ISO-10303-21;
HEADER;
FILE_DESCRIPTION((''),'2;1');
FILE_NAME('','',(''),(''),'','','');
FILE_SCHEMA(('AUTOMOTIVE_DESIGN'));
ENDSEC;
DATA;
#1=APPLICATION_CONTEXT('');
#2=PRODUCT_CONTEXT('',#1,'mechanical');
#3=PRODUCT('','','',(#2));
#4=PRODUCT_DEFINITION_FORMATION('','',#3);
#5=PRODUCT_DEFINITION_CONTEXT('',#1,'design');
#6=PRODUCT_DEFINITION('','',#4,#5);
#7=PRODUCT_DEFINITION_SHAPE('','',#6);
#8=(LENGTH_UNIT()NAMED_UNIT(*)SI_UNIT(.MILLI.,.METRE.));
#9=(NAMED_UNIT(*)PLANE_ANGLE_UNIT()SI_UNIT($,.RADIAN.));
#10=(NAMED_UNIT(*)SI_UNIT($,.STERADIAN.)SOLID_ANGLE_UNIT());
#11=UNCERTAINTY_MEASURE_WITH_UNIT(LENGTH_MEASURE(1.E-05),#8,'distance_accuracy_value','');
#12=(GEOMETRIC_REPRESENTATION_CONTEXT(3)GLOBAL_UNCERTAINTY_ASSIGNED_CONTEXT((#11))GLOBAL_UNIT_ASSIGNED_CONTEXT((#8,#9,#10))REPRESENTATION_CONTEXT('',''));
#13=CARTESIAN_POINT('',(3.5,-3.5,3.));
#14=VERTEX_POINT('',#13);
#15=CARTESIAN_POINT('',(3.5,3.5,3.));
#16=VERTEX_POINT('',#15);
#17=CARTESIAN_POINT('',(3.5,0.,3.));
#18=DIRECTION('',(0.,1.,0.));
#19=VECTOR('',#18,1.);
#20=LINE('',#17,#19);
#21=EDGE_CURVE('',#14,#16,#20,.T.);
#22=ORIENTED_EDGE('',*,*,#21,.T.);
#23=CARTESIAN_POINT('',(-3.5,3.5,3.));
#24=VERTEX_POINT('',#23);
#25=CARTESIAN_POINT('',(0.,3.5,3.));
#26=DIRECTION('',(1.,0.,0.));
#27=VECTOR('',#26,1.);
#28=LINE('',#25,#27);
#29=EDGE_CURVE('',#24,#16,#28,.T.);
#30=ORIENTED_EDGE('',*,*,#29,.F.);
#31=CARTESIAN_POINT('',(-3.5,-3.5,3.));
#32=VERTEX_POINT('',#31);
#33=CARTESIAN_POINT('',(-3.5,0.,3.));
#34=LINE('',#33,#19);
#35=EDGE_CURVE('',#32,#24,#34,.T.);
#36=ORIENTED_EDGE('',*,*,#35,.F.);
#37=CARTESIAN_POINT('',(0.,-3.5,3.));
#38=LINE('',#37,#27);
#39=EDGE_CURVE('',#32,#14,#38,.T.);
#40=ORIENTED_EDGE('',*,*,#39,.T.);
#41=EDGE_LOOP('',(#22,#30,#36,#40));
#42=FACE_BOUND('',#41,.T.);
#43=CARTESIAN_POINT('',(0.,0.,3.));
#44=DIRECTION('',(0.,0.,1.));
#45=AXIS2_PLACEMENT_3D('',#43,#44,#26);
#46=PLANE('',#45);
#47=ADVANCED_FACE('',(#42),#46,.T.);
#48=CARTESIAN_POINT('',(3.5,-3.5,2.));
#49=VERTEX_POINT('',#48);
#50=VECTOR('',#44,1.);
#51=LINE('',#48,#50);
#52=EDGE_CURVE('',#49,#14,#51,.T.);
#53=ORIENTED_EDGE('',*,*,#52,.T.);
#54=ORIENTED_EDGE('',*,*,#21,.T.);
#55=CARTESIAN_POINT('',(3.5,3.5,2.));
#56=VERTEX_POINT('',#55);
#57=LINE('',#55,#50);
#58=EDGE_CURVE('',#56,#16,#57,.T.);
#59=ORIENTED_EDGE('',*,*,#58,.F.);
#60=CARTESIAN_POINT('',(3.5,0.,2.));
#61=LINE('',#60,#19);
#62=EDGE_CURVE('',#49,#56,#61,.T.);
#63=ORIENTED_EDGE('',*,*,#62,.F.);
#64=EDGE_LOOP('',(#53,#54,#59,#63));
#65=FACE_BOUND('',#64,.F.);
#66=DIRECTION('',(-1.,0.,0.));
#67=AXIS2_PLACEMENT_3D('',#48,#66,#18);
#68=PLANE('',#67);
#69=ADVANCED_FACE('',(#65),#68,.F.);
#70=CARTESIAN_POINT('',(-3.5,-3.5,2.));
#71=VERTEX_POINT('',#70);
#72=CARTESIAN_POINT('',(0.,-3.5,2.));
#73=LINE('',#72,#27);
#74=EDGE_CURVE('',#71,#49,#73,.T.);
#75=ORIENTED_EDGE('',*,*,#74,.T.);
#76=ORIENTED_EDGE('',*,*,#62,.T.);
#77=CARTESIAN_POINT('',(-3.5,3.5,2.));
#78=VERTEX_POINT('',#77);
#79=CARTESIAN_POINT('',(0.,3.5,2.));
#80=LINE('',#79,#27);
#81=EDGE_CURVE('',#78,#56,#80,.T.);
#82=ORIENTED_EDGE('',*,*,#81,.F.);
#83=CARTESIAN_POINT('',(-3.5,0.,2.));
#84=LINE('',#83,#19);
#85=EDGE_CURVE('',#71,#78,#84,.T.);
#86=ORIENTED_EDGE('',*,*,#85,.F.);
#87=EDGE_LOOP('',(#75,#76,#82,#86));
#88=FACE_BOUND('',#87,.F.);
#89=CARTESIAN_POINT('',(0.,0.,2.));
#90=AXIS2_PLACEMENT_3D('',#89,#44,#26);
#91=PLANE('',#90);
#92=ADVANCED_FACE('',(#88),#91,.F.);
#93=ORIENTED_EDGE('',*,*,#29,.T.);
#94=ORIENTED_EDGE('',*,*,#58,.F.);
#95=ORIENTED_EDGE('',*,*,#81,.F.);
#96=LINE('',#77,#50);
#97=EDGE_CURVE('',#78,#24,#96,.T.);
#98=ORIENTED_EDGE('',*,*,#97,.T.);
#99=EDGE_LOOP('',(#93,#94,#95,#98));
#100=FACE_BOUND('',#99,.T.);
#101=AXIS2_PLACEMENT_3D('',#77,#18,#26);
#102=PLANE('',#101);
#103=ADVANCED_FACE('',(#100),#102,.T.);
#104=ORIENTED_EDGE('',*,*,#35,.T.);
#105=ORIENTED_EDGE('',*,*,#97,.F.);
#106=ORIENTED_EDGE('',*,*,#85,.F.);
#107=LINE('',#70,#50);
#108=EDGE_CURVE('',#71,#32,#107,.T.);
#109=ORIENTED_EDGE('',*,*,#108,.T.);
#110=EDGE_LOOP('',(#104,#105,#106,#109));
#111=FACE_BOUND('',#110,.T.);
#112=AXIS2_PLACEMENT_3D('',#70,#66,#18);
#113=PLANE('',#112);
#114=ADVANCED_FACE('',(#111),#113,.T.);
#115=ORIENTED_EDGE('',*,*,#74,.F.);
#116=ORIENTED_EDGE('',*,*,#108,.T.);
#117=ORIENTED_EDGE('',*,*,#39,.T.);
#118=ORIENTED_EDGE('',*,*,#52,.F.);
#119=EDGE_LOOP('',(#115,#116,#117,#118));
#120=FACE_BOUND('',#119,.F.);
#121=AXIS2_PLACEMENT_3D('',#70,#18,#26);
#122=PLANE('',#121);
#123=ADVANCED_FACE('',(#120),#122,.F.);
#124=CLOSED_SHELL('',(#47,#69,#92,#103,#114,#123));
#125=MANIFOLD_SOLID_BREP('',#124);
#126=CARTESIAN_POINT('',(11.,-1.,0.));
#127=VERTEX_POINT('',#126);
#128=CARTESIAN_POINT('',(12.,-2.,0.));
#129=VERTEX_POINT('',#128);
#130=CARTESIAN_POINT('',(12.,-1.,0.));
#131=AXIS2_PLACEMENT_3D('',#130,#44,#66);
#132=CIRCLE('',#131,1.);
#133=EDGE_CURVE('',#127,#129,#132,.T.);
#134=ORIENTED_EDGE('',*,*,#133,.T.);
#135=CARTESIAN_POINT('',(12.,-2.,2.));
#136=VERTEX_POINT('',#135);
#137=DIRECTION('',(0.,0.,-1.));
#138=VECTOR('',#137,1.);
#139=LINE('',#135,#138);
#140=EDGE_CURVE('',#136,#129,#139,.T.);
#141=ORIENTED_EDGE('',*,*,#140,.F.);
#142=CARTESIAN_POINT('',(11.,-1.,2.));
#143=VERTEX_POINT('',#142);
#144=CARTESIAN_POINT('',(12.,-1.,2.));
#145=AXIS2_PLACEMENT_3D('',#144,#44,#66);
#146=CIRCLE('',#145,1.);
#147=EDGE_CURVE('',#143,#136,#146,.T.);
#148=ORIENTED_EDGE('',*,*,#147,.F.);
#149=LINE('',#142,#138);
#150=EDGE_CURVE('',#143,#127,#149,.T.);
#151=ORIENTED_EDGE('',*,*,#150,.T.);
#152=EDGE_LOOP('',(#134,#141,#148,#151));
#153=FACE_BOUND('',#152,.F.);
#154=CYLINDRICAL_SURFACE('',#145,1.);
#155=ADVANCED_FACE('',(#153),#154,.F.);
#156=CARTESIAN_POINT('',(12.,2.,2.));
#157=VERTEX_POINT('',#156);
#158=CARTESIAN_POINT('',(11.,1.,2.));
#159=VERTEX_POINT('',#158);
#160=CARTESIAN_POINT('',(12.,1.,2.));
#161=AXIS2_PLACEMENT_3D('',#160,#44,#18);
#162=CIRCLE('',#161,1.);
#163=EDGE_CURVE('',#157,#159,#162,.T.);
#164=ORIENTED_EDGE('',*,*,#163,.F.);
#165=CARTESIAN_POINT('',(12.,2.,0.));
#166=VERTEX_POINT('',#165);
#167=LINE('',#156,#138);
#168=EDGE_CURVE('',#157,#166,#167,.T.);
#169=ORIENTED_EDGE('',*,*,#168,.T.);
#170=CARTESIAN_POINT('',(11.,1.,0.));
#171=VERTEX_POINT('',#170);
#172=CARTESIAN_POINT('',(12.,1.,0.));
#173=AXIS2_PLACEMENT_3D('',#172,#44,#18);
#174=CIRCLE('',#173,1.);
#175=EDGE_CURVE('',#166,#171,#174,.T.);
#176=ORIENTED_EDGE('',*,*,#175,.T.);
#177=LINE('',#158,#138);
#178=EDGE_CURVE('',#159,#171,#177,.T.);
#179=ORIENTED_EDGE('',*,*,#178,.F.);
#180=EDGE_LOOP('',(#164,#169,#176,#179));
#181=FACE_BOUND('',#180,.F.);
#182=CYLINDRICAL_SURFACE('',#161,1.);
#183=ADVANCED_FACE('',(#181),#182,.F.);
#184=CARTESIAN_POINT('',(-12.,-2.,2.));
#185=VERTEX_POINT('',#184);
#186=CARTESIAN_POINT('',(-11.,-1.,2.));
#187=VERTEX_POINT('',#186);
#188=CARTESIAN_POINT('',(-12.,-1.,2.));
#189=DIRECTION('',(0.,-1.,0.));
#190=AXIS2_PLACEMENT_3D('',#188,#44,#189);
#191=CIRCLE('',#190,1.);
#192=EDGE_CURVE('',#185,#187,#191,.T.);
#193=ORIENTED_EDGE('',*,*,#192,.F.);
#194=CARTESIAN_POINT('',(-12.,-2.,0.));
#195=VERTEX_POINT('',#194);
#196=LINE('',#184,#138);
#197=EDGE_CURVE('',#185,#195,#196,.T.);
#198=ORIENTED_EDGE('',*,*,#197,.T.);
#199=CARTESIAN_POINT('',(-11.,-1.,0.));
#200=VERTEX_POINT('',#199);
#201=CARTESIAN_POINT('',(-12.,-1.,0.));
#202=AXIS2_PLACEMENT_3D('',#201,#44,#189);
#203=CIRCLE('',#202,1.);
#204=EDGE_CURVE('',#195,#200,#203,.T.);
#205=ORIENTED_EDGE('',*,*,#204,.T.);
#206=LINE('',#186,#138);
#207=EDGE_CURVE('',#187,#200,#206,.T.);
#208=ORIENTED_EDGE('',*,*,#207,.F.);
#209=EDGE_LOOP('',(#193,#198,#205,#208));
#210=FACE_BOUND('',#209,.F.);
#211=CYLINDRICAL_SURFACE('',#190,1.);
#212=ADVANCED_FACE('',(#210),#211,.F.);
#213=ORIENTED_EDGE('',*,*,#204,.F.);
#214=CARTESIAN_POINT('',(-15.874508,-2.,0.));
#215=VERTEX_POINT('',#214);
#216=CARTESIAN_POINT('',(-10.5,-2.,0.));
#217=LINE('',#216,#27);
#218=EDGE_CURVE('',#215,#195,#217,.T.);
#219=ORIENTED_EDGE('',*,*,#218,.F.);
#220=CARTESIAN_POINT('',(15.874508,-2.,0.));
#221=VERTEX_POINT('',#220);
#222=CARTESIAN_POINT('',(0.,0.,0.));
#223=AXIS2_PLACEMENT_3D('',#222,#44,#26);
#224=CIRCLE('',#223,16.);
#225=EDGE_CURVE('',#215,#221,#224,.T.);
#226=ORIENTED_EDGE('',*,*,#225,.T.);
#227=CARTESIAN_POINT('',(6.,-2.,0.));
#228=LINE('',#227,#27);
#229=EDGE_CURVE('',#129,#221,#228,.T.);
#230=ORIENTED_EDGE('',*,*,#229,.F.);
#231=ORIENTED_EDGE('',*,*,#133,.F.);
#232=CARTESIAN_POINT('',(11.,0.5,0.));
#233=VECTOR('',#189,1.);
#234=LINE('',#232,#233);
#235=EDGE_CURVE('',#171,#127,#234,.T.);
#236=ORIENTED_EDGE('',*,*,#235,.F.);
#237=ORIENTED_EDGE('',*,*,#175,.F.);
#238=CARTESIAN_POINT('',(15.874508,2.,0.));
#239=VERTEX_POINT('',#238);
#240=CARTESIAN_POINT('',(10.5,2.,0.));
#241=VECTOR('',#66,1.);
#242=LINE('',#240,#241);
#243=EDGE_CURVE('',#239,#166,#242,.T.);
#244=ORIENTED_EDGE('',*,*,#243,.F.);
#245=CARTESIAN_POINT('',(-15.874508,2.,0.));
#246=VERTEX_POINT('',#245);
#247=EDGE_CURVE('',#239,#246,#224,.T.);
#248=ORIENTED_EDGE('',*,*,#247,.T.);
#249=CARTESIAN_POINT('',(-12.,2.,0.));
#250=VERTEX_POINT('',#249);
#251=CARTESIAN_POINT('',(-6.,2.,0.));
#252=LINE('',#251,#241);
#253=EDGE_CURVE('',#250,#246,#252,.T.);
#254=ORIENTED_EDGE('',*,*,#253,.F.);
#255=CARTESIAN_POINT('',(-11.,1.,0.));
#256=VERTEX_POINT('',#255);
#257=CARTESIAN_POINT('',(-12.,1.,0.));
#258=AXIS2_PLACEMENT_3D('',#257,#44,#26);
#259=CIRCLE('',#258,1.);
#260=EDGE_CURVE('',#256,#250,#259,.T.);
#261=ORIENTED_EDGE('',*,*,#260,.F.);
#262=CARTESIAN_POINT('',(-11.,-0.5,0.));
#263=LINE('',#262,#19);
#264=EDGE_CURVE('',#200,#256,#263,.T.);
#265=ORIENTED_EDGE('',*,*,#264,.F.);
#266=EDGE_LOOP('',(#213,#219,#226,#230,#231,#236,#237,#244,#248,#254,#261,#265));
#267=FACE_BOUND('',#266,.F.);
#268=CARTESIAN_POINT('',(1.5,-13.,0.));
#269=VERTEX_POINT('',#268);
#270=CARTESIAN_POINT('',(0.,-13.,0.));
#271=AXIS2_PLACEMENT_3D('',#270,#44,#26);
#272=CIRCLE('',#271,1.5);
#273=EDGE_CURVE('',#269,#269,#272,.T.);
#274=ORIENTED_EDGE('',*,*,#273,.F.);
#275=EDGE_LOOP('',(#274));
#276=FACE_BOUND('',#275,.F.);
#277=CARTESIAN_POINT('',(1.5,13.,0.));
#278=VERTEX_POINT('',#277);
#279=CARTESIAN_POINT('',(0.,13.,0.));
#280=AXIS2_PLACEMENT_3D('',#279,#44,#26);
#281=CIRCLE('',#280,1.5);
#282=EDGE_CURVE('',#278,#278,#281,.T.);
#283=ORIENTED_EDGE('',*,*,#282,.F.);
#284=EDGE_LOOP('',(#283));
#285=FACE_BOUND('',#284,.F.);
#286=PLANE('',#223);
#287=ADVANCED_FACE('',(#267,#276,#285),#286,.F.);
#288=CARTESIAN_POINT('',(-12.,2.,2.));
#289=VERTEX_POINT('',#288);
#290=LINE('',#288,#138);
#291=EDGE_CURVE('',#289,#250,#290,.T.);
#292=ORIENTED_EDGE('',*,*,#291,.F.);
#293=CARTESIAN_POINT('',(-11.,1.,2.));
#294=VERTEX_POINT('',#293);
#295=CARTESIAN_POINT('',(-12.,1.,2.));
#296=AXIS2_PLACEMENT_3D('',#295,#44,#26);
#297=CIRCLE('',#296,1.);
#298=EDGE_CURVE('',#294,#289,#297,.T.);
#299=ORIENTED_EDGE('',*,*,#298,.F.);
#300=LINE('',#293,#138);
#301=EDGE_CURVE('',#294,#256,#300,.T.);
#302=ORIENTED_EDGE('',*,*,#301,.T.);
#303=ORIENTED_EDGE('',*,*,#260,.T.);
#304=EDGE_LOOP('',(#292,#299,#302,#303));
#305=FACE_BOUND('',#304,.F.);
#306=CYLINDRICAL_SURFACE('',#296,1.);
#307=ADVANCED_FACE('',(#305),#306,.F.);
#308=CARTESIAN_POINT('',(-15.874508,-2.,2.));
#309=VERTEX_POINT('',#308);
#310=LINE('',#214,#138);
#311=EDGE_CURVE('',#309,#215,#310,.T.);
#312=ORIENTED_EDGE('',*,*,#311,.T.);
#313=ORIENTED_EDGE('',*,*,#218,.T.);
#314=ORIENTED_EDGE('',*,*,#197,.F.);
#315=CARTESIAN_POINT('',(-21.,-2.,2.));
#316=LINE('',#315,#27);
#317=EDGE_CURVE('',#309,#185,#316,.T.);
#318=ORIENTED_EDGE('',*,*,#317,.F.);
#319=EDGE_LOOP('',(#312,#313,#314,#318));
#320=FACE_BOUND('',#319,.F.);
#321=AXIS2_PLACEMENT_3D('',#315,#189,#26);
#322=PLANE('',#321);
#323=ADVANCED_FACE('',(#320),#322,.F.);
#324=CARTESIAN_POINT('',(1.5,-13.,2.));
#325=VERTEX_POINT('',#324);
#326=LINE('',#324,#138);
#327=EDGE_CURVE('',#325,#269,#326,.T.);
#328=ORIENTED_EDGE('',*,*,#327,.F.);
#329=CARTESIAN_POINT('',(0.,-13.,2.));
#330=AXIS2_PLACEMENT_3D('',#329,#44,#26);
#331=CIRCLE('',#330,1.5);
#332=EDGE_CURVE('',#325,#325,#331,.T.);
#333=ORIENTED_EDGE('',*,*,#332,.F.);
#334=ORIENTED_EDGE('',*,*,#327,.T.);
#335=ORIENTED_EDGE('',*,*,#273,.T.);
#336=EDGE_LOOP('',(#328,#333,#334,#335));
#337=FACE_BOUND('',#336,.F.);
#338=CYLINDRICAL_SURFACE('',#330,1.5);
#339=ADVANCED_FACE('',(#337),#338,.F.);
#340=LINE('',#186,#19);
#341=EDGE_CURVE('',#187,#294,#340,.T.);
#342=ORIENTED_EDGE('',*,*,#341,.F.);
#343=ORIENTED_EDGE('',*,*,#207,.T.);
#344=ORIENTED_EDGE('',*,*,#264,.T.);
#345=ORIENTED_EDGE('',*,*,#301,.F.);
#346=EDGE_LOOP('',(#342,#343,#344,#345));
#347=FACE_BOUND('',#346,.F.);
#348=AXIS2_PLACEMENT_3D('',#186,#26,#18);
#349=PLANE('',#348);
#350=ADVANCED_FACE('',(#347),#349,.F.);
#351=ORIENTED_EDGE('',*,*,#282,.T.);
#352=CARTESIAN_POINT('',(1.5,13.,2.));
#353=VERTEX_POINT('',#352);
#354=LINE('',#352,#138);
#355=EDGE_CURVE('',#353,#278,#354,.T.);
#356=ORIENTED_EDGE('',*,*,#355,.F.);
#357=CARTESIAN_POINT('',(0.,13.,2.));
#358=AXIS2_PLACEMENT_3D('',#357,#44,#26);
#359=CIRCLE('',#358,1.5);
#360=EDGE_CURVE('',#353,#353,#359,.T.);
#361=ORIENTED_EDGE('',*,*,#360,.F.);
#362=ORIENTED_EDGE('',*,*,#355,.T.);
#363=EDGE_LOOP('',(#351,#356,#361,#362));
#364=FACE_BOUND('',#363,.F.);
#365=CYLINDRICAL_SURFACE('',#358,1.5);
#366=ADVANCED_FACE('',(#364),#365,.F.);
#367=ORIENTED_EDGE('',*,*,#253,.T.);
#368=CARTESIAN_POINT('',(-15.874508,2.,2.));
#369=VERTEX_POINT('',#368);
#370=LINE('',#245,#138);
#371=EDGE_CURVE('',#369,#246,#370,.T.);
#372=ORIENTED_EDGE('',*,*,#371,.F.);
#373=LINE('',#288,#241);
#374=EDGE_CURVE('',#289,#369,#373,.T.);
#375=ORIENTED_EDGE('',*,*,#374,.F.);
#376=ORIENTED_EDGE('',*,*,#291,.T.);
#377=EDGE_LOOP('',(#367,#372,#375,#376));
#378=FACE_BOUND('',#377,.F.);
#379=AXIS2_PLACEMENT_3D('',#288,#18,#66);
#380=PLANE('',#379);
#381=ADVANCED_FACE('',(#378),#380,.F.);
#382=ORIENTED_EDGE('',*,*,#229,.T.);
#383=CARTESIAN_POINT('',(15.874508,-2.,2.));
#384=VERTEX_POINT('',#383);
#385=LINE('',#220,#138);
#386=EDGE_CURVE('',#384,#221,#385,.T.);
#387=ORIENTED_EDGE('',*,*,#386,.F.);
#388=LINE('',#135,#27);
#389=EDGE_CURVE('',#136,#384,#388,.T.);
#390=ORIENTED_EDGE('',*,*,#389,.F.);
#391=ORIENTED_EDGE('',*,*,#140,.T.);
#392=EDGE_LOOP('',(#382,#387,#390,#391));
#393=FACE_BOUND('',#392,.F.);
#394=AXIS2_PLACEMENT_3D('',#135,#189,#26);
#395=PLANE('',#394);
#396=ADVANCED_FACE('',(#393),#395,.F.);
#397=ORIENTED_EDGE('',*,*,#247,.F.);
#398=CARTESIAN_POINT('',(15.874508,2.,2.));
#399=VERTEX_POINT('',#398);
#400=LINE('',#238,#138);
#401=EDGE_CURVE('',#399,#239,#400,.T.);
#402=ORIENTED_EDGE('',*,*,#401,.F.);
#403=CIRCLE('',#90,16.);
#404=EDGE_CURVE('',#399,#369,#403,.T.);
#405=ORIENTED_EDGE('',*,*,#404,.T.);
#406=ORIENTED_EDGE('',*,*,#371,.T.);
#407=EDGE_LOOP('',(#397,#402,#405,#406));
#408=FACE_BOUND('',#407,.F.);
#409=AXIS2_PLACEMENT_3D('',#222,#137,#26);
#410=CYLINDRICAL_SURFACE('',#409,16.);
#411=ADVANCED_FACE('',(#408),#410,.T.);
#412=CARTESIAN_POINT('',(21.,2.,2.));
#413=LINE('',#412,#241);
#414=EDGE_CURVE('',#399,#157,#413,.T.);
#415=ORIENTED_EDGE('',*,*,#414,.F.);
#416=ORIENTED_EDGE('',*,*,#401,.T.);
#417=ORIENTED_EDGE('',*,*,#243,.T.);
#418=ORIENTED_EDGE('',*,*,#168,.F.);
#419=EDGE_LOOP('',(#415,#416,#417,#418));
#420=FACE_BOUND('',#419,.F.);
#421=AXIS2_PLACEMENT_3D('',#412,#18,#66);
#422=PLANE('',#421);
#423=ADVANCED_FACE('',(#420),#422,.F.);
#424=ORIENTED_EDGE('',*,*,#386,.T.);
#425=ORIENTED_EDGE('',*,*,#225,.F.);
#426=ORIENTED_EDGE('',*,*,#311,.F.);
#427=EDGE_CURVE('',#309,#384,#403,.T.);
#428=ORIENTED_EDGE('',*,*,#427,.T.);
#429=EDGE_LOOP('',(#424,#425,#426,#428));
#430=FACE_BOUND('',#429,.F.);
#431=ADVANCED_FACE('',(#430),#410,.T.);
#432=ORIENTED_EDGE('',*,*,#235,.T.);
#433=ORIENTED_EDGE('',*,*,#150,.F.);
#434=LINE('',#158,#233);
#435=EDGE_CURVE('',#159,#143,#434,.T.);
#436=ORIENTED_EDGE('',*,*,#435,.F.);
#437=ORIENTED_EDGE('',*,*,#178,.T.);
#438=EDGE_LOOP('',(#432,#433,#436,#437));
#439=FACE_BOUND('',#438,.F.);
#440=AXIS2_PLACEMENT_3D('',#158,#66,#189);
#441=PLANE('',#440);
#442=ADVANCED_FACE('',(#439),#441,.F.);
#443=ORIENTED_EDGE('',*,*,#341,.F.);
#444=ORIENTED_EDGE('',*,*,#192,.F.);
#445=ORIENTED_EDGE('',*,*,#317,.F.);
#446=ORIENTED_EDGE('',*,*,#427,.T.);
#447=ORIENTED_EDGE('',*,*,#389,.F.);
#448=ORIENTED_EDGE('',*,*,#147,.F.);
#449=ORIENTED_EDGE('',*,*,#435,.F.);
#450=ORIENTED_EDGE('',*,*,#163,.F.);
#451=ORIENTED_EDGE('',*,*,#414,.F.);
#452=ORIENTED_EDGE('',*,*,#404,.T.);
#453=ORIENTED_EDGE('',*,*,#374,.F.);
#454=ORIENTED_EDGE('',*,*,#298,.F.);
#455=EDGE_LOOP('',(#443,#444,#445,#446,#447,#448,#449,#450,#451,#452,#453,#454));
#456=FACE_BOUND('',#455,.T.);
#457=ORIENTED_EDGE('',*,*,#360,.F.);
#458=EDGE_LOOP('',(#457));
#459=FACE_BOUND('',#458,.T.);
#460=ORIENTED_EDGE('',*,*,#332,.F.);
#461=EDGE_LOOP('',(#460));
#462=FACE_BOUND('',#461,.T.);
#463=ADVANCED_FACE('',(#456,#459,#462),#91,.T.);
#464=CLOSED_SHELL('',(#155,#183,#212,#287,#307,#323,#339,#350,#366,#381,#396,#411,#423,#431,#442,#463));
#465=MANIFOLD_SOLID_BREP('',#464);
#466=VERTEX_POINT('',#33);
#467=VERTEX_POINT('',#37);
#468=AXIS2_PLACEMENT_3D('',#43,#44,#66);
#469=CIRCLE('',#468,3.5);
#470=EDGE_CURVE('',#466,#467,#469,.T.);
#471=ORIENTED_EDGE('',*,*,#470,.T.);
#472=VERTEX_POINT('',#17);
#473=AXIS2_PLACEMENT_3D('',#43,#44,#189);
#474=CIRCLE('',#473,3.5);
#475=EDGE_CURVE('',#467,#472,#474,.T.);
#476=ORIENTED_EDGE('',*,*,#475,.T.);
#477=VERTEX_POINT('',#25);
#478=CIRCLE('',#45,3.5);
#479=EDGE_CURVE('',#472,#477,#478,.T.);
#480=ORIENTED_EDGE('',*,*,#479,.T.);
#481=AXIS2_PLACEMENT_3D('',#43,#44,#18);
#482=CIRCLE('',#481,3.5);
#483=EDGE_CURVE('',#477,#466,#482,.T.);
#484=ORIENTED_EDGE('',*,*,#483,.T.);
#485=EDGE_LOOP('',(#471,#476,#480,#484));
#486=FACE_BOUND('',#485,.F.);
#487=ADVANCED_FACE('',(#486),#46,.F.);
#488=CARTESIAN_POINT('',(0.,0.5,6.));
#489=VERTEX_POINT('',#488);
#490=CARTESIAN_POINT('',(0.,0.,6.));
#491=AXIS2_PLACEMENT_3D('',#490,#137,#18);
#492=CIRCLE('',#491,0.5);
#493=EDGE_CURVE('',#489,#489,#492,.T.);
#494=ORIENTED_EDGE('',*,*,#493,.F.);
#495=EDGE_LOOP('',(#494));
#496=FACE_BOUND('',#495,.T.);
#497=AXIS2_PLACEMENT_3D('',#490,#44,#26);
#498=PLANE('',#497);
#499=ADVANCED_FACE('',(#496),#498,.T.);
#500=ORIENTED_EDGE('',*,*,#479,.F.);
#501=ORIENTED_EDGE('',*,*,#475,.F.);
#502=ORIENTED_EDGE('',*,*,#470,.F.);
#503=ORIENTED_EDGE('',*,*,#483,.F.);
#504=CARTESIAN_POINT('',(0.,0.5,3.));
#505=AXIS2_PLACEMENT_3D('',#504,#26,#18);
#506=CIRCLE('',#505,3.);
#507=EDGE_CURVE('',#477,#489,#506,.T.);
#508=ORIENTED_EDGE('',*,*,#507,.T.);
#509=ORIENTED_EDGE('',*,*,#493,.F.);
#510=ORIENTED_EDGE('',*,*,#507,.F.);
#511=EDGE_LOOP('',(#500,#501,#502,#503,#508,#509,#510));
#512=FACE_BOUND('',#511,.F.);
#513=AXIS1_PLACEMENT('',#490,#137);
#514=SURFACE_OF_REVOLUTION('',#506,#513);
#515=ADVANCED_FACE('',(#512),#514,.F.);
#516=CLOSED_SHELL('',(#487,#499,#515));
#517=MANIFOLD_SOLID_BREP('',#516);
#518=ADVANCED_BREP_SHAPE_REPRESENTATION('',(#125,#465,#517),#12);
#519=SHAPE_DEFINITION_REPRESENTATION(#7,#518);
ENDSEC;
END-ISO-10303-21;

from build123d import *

# Parameters (mm, degrees)
F0_R     = 16
F1_DEPTH = 2
F2_R     = 1.5
F3_DEPTH = 2.001
F4_W     = 7
F4_H     = 7
F5_DEPTH = 1
F7_DEPTH = 3


# Not quite as in the source:
# - a fillet or chamfer that OpenCascade refuses, or shapes differently, is made with other operations: its cross-section is extruded or revolved along the edge and cut away or added


with BuildPart() as f1:
    # F0 (on Top) → F1 (new body)
    with BuildSketch(Plane.XY):
        Circle(F0_R)
    extrude(amount=F1_DEPTH)

    # F2 (on face) → F3 (cut, through all)
    with BuildSketch(Plane.XY.offset(2)):
        with BuildLine():
            ThreePointArc((-11, 1), (-11.2928932188, 1.7071067812), (-12, 2))
            Line((-12, 2), (-15.8745078664, 2))
            ThreePointArc((-15.8745078664, 2), (-16, 0), (-15.8745078664, -2))
            Line((-15.8745078664, -2), (-12, -2))
            ThreePointArc((-12, -2), (-11.2928932188, -1.7071067812), (-11, -1))
            Line((-11, -1), (-11, 1))
        make_face()
        with BuildLine():
            ThreePointArc((-15.8745078664, -2), (-16, 0), (-15.8745078664, 2))
            Line((-15.8745078664, 2), (-21, 2))
            Line((-21, 2), (-21, -2))
            Line((-21, -2), (-15.8745078664, -2))
        make_face()
        with BuildLine():
            ThreePointArc((16, 0), (15.9685961478, 1.0019666007), (15.8745078664, 2))
            Line((15.8745078664, 2), (12, 2))
            ThreePointArc((12, 2), (11.2928932188, 1.7071067812), (11, 1))
            Line((11, 1), (11, -1))
            ThreePointArc((11, -1), (11.2928932188, -1.7071067812), (12, -2))
            Line((12, -2), (15.8745078664, -2))
            ThreePointArc((15.8745078664, -2), (15.9685961478, -1.0019666007), (16, 0))
        make_face()
        with BuildLine():
            Line((21, 2), (15.8745078664, 2))
            ThreePointArc((15.8745078664, 2), (15.9685961478, 1.0019666007), (16, 0))
            ThreePointArc((16, 0), (15.9685961478, -1.0019666007), (15.8745078664, -2))
            Line((15.8745078664, -2), (21, -2))
            Line((21, -2), (21, 2))
        make_face()
        with Locations((0, 13)):
            Circle(F2_R)
        with Locations((0, -13)):
            Circle(F2_R)
    extrude(amount=-F3_DEPTH, mode=Mode.SUBTRACT)


with BuildPart() as f5:
    # F4 (on face) → F5 (new body)
    with BuildSketch(Plane.XY.offset(2)):
        Rectangle(F4_W, F4_H)
    extrude(amount=F5_DEPTH)


with BuildPart() as f7:
    # F6 (on face) → F7 (new body)
    with BuildSketch(Plane.XY.offset(3)):
        with BuildLine():
            ThreePointArc((0, -3.5), (2.4748737342, -2.4748737342), (3.5, 0))
            ThreePointArc((3.5, 0), (2.4748737342, 2.4748737342), (0, 3.5))
            ThreePointArc((0, 3.5), (-2.4748737342, 2.4748737342), (-3.5, 0))
            ThreePointArc((-3.5, 0), (-2.4748737342, -2.4748737342), (0, -3.5))
        make_face()
    extrude(amount=F7_DEPTH)

    # F8: fillet of radius 3 on 1 edges, made by hand

    # F8_s1 → F8_t2 (revolve, cut)
    with BuildSketch(Plane.YZ):
        with BuildLine():
            ThreePointArc((3.5, 3), (2.6213203436, 5.1213203436), (0.5, 6))
            Line((0.5, 6), (3.5, 6))
            Line((3.5, 6), (3.5, 3))
        make_face()
    revolve(axis=Axis((0, 0, 6), (0, 0, -1)), mode=Mode.SUBTRACT)


solid = Compound([f1.part, f5.part, f7.part])
